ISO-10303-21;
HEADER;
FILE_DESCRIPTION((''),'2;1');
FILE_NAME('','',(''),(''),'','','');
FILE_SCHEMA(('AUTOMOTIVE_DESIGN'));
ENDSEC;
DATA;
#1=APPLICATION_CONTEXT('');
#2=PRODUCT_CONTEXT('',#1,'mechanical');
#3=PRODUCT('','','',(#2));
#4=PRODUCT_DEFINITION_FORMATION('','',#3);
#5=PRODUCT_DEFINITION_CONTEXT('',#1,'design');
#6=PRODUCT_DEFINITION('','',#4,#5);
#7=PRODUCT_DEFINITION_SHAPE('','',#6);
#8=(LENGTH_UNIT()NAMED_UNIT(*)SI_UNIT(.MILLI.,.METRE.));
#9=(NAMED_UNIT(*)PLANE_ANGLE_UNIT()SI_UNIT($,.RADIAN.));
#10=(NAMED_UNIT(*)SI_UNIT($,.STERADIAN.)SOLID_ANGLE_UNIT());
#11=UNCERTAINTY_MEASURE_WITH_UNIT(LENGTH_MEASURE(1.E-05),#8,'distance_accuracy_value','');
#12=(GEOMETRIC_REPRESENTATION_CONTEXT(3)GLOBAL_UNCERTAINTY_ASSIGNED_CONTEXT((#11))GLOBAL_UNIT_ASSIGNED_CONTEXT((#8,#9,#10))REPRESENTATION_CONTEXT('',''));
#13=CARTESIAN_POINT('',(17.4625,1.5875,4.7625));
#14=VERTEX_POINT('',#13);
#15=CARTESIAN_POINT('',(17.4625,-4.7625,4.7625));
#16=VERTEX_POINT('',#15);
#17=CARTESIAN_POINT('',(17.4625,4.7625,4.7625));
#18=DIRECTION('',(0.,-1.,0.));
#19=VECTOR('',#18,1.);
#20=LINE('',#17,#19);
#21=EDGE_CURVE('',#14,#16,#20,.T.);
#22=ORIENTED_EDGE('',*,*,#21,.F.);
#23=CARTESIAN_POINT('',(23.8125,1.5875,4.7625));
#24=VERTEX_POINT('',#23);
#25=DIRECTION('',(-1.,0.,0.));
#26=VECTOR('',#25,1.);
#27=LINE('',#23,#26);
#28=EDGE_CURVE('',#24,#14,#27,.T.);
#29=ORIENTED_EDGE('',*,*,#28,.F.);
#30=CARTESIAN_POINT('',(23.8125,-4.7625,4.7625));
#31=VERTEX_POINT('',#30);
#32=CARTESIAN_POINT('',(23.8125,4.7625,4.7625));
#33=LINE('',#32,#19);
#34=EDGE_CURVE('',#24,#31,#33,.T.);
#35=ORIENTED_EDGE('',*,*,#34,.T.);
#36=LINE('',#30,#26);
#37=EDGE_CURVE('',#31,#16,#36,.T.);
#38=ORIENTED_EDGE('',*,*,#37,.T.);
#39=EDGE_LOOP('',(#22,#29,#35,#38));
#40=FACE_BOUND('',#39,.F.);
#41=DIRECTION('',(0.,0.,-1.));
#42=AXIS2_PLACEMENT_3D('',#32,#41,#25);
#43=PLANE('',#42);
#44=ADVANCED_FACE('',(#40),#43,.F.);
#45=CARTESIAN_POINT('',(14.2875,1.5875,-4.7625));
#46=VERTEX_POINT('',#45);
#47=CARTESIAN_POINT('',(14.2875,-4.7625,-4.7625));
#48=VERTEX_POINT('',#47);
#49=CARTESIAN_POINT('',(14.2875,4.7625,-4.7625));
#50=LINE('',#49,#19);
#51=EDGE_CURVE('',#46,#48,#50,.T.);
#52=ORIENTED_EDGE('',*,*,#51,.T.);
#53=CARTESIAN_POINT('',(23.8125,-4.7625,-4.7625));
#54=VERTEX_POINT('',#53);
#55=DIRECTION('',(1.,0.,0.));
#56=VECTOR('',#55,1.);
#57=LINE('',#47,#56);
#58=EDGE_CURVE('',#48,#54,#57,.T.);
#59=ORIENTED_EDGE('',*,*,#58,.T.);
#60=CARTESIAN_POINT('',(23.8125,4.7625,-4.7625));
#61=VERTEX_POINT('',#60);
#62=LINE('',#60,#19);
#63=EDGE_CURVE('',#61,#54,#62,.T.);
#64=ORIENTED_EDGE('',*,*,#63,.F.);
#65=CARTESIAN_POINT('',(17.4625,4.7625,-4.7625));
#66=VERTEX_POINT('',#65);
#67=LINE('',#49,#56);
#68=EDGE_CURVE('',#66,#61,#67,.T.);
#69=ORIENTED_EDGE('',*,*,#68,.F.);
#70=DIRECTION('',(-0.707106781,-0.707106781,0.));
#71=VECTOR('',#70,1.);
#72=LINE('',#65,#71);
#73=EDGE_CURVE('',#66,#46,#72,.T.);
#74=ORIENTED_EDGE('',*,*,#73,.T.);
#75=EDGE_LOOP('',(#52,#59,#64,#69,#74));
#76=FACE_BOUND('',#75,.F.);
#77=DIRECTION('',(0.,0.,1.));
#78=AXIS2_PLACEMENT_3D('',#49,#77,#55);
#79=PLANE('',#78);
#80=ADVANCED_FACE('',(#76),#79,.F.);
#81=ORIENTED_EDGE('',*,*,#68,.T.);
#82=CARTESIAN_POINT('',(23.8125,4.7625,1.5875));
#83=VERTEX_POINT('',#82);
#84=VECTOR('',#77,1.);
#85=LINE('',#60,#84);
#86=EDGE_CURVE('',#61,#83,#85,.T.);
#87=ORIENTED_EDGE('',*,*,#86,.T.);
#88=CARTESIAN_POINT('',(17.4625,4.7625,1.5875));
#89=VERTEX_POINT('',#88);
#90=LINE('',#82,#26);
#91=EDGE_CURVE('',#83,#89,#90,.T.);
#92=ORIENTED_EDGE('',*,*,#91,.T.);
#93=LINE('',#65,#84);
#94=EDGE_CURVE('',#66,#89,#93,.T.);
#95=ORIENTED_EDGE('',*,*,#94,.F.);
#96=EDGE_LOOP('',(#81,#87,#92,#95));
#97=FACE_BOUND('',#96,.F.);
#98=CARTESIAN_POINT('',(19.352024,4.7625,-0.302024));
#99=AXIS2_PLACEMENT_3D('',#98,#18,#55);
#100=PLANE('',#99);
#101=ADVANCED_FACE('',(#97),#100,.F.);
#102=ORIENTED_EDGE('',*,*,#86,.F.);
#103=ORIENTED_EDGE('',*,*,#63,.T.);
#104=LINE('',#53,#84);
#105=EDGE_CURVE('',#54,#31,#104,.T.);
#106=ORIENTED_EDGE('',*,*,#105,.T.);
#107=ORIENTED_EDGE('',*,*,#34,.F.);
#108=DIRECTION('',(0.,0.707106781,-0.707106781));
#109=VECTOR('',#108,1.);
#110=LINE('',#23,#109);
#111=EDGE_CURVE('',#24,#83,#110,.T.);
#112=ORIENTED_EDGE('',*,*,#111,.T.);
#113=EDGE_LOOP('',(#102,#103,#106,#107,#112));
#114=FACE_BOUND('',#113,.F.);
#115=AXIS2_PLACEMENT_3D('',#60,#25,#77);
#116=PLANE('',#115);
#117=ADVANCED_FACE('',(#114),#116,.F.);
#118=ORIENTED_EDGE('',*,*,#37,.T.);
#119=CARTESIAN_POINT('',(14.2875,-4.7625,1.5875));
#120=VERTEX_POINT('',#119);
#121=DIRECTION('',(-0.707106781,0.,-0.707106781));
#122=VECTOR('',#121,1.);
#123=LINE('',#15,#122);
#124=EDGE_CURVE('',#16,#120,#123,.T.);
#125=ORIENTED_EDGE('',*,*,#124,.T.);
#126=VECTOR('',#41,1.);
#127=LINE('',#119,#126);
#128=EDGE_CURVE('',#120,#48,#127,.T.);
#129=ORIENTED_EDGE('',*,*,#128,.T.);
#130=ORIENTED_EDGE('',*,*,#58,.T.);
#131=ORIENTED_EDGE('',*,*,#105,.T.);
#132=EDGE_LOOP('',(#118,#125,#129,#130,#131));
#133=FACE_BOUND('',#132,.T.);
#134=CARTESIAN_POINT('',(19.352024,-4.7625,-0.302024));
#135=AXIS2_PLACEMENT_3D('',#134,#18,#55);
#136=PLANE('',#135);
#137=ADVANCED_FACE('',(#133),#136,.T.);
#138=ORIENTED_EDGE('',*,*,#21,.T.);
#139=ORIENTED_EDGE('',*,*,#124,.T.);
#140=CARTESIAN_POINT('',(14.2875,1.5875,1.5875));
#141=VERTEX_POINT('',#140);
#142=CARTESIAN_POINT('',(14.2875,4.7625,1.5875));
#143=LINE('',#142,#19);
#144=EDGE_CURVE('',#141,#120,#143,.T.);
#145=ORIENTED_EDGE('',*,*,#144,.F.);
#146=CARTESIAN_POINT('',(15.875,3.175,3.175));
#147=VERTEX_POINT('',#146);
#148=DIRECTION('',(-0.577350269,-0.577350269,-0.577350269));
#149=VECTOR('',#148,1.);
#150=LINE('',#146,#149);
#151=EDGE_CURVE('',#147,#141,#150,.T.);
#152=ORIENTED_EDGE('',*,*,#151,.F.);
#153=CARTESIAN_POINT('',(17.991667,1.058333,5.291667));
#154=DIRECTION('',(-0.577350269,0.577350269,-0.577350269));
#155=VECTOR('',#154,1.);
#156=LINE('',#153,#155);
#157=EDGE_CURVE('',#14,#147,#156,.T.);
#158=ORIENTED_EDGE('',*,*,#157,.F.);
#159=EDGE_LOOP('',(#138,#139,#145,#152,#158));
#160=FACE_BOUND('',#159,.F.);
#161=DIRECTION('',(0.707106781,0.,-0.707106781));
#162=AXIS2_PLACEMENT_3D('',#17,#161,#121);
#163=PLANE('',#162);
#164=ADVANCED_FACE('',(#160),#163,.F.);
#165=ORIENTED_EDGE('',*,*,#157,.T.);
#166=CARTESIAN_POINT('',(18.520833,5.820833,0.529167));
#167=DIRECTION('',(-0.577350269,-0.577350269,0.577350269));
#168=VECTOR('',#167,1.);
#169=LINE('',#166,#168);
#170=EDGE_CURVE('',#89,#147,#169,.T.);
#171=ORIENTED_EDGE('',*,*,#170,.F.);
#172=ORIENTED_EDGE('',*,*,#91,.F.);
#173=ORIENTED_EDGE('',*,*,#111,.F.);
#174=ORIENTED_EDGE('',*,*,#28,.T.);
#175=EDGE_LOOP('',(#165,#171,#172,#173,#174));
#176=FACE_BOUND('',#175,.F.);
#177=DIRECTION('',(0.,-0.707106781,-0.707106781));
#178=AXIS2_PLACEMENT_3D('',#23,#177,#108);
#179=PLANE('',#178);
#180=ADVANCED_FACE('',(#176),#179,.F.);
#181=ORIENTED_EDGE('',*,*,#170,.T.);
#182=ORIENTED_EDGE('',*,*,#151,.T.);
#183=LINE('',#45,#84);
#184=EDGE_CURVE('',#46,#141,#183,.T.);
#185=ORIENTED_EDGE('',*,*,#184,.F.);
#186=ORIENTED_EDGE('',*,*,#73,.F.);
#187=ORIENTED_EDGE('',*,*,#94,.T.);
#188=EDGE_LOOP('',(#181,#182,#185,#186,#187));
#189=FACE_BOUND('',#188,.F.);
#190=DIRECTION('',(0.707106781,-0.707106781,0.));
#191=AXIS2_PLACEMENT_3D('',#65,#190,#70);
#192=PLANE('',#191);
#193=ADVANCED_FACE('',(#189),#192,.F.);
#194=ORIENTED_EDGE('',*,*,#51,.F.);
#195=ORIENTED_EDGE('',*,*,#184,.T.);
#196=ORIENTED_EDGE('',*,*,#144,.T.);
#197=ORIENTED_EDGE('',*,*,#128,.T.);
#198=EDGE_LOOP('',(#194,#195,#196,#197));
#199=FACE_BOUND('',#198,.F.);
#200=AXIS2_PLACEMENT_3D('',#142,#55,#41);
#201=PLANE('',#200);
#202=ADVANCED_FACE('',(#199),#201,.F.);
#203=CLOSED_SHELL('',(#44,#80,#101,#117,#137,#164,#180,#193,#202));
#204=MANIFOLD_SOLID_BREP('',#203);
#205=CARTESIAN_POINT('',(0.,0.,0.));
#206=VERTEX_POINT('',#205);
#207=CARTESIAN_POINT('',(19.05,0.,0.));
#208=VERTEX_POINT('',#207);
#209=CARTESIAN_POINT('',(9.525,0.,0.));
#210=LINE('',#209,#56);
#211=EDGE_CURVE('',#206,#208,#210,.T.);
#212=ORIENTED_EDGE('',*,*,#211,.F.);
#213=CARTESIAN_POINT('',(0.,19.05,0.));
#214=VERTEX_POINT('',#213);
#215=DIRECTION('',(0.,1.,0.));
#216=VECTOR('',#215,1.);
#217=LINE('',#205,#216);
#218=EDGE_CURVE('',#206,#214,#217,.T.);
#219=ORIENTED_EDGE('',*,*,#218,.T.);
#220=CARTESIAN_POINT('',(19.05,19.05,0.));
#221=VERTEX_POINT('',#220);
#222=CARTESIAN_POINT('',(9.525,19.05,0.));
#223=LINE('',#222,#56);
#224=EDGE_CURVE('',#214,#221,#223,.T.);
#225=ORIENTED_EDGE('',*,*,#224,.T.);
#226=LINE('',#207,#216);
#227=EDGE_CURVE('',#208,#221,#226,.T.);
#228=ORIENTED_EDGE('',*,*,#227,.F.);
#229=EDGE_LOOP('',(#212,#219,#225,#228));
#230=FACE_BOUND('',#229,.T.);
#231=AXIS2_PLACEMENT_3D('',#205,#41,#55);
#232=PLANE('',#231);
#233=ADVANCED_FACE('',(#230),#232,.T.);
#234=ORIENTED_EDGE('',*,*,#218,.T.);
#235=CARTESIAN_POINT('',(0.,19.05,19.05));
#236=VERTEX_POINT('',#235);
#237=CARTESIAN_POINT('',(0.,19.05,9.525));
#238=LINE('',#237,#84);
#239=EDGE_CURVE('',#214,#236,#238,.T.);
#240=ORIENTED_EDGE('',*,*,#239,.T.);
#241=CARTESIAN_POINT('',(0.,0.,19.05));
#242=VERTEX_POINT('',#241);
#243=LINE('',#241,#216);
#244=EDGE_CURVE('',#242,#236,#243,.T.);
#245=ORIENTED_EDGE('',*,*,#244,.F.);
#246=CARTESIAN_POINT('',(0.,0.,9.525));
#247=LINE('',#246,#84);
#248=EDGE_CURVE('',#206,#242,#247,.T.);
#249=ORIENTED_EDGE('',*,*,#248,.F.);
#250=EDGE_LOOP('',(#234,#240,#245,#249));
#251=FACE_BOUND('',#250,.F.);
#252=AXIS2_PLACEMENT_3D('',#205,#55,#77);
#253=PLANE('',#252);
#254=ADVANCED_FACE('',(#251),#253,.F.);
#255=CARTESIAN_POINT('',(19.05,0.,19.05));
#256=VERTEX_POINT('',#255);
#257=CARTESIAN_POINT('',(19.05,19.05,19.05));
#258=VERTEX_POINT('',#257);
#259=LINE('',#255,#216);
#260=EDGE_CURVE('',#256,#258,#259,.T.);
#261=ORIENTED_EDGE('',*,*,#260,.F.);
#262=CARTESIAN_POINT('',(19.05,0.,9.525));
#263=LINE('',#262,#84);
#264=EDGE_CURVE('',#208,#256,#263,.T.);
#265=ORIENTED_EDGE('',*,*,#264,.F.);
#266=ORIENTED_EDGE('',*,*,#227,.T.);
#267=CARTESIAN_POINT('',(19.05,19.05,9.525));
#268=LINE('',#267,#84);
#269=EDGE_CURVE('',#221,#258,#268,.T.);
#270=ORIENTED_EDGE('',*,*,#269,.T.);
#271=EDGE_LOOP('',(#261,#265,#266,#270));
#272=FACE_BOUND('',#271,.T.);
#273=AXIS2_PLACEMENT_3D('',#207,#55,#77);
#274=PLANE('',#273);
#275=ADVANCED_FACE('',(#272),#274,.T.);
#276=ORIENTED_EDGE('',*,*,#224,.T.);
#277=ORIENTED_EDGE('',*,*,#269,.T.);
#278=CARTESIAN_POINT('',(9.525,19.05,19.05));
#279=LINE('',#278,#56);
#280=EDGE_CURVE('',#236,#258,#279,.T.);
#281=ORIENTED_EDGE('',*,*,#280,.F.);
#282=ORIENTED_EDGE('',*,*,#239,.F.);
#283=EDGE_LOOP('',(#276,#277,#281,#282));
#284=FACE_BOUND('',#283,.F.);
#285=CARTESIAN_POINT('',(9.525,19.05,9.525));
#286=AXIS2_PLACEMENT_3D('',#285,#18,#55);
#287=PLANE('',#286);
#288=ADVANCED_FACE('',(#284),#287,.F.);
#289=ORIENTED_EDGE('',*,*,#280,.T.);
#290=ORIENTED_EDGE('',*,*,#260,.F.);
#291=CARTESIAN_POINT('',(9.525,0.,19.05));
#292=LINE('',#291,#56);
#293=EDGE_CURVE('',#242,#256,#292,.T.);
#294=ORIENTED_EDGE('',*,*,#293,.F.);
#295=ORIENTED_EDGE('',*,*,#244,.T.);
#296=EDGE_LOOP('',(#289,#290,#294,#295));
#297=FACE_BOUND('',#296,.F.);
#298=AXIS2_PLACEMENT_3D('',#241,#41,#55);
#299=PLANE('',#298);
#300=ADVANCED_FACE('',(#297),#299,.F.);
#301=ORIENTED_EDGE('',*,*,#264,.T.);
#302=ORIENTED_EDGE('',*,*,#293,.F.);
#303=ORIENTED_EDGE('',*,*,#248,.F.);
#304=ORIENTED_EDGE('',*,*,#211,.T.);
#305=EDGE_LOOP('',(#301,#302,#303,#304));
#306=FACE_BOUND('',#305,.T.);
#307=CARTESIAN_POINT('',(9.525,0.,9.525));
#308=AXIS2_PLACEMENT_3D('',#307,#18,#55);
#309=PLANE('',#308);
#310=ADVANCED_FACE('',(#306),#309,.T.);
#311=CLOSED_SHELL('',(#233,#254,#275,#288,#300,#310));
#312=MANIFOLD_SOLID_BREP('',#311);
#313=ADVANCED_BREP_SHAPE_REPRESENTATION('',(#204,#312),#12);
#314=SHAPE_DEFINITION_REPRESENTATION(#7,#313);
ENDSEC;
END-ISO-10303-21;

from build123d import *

# Parameters (mm, degrees)
F0_W     = 19.05
F0_H     = 19.05
F1_DEPTH = 19.05
F4_DEPTH = 9.525
F6_DEPTH = 13.8938
F8_DEPTH = 12.192


with BuildPart() as f1:
    # F0 (on Front) → F1 (new body)
    with BuildSketch(Plane.XZ):
        with Locations((9.525, 9.525)):
            Rectangle(F0_W, F0_H)
    extrude(amount=-F1_DEPTH)


with BuildPart() as f4:
    # F3 (on offset) → F4 (new body)
    with BuildSketch(Plane.XZ.offset(-4.7625)):
        Polygon((23.8125, 4.7625), (17.4625, 4.7625), (14.2875, 1.5875), (14.2875, -4.7625), (23.8125, -4.7625), align=None)
    extrude(amount=F4_DEPTH)

    # F5 (on face) → F6 (cut)
    with BuildSketch(Plane.YZ.offset(23.8125)):
        Polygon((4.7625, 4.7625), (1.5875, 4.7625), (4.7625, 1.5875), align=None)
    extrude(amount=-F6_DEPTH, mode=Mode.SUBTRACT)

    # F7 (on face) → F8 (cut)
    with BuildSketch(Plane(origin=(0, 0, -4.7625), x_dir=(1, 0, 0), z_dir=(0, 0, -1))):
        Polygon((14.2875, -1.5875), (14.2875, -4.7625), (17.4625, -4.7625), align=None)
    extrude(amount=-F8_DEPTH, mode=Mode.SUBTRACT)


solid = Compound([f1.part, f4.part])
